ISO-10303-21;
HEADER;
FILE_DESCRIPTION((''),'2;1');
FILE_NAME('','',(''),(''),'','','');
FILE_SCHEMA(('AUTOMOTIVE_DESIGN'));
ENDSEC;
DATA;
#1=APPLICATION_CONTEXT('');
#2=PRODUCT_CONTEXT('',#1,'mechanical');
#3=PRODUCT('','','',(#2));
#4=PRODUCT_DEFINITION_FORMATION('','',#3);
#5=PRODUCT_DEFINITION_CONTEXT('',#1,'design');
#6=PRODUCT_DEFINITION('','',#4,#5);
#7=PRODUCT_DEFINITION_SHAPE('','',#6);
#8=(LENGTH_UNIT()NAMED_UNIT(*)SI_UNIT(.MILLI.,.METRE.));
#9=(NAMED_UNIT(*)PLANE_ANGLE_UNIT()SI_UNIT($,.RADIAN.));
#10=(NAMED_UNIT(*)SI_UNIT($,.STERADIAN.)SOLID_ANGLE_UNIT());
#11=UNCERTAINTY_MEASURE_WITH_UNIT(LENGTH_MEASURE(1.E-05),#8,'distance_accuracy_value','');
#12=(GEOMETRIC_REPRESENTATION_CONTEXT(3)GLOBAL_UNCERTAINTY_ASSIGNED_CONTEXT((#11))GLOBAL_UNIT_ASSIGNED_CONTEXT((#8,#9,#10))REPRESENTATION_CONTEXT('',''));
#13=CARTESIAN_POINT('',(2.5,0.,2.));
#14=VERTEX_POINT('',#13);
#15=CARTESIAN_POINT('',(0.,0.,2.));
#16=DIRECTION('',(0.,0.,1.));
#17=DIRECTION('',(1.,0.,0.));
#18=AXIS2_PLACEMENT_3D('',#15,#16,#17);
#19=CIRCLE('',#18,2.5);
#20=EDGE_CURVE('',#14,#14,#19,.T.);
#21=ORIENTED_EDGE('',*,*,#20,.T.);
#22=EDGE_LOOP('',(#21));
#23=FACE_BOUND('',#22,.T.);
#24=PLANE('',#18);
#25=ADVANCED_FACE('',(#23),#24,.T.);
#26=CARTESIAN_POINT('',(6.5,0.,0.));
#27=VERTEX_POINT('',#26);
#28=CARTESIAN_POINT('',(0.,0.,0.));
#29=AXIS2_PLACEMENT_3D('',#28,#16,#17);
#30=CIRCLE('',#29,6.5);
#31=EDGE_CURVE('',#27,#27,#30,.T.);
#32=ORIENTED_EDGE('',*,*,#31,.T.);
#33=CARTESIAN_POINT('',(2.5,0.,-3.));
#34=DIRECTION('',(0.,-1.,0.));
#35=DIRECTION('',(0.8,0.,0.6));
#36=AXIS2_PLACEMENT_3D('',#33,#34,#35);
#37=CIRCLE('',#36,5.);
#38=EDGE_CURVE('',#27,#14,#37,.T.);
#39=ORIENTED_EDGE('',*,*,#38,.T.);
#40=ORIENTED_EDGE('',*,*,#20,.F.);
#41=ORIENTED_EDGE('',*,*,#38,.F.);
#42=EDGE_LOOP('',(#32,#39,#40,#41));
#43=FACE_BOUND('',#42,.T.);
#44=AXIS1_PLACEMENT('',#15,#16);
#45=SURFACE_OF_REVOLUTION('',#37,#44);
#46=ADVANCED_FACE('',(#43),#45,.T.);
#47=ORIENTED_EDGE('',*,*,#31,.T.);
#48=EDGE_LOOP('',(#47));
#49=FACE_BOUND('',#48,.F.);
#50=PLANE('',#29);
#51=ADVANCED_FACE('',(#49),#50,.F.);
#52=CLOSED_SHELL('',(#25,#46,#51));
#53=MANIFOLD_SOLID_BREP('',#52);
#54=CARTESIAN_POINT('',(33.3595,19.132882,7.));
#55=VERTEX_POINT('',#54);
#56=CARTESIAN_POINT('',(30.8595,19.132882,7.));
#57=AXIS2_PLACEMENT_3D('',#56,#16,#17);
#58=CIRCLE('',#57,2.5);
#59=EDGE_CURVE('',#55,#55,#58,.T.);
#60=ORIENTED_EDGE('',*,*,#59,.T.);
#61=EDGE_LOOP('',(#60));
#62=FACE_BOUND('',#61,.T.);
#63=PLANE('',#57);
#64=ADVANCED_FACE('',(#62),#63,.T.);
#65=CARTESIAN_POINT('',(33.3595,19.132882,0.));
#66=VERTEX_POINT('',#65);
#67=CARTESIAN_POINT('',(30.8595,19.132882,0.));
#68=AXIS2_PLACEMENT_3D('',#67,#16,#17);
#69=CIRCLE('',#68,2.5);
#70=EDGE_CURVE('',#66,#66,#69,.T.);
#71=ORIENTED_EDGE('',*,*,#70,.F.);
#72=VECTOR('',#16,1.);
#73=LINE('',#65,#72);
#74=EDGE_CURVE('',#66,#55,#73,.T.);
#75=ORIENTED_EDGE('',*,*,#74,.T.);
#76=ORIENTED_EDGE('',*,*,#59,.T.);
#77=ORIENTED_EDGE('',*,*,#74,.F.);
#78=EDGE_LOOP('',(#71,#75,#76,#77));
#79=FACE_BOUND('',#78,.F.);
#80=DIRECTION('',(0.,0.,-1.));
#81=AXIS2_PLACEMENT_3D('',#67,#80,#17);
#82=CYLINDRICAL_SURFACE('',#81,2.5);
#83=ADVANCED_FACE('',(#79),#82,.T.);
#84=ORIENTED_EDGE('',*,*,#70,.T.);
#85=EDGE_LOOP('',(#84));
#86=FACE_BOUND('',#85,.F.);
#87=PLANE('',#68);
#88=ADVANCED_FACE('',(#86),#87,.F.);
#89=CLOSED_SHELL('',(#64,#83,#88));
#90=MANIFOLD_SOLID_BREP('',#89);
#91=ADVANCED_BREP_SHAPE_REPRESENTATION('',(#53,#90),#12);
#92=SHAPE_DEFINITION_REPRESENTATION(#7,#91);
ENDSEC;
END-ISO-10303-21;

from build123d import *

# Parameters (mm, degrees)
F0_R     = 6.5
F1_DEPTH = 2
F3_R     = 2.5
F4_DEPTH = 7


# Not quite as in the source:
# - a fillet or chamfer that OpenCascade refuses, or shapes differently, is made with other operations: its cross-section is extruded or revolved along the edge and cut away or added


with BuildPart() as f1:
    # F0 (on Top) → F1 (new body)
    with BuildSketch(Plane.XY):
        Circle(F0_R)
    extrude(amount=F1_DEPTH)

    # F2: fillet of radius 5 on 1 edges, made by hand

    # F2_s1 → F2_t2 (revolve, cut)
    with BuildSketch(Plane.XZ):
        with BuildLine():
            ThreePointArc((6.5, 0), (4.7360679775, 1.472135955), (2.5, 2))
            Line((2.5, 2), (6.5, 2))
            Line((6.5, 2), (6.5, 0))
        make_face()
    revolve(axis=Axis((0, 0, 2), (0, 0, 1)), mode=Mode.SUBTRACT)


with BuildPart() as f4:
    # F3 (on Top) → F4 (new body)
    with BuildSketch(Plane.XY):
        with Locations((30.8595001698, 19.1328823566)):
            Circle(F3_R)
    extrude(amount=F4_DEPTH)


solid = Compound([f1.part, f4.part])
